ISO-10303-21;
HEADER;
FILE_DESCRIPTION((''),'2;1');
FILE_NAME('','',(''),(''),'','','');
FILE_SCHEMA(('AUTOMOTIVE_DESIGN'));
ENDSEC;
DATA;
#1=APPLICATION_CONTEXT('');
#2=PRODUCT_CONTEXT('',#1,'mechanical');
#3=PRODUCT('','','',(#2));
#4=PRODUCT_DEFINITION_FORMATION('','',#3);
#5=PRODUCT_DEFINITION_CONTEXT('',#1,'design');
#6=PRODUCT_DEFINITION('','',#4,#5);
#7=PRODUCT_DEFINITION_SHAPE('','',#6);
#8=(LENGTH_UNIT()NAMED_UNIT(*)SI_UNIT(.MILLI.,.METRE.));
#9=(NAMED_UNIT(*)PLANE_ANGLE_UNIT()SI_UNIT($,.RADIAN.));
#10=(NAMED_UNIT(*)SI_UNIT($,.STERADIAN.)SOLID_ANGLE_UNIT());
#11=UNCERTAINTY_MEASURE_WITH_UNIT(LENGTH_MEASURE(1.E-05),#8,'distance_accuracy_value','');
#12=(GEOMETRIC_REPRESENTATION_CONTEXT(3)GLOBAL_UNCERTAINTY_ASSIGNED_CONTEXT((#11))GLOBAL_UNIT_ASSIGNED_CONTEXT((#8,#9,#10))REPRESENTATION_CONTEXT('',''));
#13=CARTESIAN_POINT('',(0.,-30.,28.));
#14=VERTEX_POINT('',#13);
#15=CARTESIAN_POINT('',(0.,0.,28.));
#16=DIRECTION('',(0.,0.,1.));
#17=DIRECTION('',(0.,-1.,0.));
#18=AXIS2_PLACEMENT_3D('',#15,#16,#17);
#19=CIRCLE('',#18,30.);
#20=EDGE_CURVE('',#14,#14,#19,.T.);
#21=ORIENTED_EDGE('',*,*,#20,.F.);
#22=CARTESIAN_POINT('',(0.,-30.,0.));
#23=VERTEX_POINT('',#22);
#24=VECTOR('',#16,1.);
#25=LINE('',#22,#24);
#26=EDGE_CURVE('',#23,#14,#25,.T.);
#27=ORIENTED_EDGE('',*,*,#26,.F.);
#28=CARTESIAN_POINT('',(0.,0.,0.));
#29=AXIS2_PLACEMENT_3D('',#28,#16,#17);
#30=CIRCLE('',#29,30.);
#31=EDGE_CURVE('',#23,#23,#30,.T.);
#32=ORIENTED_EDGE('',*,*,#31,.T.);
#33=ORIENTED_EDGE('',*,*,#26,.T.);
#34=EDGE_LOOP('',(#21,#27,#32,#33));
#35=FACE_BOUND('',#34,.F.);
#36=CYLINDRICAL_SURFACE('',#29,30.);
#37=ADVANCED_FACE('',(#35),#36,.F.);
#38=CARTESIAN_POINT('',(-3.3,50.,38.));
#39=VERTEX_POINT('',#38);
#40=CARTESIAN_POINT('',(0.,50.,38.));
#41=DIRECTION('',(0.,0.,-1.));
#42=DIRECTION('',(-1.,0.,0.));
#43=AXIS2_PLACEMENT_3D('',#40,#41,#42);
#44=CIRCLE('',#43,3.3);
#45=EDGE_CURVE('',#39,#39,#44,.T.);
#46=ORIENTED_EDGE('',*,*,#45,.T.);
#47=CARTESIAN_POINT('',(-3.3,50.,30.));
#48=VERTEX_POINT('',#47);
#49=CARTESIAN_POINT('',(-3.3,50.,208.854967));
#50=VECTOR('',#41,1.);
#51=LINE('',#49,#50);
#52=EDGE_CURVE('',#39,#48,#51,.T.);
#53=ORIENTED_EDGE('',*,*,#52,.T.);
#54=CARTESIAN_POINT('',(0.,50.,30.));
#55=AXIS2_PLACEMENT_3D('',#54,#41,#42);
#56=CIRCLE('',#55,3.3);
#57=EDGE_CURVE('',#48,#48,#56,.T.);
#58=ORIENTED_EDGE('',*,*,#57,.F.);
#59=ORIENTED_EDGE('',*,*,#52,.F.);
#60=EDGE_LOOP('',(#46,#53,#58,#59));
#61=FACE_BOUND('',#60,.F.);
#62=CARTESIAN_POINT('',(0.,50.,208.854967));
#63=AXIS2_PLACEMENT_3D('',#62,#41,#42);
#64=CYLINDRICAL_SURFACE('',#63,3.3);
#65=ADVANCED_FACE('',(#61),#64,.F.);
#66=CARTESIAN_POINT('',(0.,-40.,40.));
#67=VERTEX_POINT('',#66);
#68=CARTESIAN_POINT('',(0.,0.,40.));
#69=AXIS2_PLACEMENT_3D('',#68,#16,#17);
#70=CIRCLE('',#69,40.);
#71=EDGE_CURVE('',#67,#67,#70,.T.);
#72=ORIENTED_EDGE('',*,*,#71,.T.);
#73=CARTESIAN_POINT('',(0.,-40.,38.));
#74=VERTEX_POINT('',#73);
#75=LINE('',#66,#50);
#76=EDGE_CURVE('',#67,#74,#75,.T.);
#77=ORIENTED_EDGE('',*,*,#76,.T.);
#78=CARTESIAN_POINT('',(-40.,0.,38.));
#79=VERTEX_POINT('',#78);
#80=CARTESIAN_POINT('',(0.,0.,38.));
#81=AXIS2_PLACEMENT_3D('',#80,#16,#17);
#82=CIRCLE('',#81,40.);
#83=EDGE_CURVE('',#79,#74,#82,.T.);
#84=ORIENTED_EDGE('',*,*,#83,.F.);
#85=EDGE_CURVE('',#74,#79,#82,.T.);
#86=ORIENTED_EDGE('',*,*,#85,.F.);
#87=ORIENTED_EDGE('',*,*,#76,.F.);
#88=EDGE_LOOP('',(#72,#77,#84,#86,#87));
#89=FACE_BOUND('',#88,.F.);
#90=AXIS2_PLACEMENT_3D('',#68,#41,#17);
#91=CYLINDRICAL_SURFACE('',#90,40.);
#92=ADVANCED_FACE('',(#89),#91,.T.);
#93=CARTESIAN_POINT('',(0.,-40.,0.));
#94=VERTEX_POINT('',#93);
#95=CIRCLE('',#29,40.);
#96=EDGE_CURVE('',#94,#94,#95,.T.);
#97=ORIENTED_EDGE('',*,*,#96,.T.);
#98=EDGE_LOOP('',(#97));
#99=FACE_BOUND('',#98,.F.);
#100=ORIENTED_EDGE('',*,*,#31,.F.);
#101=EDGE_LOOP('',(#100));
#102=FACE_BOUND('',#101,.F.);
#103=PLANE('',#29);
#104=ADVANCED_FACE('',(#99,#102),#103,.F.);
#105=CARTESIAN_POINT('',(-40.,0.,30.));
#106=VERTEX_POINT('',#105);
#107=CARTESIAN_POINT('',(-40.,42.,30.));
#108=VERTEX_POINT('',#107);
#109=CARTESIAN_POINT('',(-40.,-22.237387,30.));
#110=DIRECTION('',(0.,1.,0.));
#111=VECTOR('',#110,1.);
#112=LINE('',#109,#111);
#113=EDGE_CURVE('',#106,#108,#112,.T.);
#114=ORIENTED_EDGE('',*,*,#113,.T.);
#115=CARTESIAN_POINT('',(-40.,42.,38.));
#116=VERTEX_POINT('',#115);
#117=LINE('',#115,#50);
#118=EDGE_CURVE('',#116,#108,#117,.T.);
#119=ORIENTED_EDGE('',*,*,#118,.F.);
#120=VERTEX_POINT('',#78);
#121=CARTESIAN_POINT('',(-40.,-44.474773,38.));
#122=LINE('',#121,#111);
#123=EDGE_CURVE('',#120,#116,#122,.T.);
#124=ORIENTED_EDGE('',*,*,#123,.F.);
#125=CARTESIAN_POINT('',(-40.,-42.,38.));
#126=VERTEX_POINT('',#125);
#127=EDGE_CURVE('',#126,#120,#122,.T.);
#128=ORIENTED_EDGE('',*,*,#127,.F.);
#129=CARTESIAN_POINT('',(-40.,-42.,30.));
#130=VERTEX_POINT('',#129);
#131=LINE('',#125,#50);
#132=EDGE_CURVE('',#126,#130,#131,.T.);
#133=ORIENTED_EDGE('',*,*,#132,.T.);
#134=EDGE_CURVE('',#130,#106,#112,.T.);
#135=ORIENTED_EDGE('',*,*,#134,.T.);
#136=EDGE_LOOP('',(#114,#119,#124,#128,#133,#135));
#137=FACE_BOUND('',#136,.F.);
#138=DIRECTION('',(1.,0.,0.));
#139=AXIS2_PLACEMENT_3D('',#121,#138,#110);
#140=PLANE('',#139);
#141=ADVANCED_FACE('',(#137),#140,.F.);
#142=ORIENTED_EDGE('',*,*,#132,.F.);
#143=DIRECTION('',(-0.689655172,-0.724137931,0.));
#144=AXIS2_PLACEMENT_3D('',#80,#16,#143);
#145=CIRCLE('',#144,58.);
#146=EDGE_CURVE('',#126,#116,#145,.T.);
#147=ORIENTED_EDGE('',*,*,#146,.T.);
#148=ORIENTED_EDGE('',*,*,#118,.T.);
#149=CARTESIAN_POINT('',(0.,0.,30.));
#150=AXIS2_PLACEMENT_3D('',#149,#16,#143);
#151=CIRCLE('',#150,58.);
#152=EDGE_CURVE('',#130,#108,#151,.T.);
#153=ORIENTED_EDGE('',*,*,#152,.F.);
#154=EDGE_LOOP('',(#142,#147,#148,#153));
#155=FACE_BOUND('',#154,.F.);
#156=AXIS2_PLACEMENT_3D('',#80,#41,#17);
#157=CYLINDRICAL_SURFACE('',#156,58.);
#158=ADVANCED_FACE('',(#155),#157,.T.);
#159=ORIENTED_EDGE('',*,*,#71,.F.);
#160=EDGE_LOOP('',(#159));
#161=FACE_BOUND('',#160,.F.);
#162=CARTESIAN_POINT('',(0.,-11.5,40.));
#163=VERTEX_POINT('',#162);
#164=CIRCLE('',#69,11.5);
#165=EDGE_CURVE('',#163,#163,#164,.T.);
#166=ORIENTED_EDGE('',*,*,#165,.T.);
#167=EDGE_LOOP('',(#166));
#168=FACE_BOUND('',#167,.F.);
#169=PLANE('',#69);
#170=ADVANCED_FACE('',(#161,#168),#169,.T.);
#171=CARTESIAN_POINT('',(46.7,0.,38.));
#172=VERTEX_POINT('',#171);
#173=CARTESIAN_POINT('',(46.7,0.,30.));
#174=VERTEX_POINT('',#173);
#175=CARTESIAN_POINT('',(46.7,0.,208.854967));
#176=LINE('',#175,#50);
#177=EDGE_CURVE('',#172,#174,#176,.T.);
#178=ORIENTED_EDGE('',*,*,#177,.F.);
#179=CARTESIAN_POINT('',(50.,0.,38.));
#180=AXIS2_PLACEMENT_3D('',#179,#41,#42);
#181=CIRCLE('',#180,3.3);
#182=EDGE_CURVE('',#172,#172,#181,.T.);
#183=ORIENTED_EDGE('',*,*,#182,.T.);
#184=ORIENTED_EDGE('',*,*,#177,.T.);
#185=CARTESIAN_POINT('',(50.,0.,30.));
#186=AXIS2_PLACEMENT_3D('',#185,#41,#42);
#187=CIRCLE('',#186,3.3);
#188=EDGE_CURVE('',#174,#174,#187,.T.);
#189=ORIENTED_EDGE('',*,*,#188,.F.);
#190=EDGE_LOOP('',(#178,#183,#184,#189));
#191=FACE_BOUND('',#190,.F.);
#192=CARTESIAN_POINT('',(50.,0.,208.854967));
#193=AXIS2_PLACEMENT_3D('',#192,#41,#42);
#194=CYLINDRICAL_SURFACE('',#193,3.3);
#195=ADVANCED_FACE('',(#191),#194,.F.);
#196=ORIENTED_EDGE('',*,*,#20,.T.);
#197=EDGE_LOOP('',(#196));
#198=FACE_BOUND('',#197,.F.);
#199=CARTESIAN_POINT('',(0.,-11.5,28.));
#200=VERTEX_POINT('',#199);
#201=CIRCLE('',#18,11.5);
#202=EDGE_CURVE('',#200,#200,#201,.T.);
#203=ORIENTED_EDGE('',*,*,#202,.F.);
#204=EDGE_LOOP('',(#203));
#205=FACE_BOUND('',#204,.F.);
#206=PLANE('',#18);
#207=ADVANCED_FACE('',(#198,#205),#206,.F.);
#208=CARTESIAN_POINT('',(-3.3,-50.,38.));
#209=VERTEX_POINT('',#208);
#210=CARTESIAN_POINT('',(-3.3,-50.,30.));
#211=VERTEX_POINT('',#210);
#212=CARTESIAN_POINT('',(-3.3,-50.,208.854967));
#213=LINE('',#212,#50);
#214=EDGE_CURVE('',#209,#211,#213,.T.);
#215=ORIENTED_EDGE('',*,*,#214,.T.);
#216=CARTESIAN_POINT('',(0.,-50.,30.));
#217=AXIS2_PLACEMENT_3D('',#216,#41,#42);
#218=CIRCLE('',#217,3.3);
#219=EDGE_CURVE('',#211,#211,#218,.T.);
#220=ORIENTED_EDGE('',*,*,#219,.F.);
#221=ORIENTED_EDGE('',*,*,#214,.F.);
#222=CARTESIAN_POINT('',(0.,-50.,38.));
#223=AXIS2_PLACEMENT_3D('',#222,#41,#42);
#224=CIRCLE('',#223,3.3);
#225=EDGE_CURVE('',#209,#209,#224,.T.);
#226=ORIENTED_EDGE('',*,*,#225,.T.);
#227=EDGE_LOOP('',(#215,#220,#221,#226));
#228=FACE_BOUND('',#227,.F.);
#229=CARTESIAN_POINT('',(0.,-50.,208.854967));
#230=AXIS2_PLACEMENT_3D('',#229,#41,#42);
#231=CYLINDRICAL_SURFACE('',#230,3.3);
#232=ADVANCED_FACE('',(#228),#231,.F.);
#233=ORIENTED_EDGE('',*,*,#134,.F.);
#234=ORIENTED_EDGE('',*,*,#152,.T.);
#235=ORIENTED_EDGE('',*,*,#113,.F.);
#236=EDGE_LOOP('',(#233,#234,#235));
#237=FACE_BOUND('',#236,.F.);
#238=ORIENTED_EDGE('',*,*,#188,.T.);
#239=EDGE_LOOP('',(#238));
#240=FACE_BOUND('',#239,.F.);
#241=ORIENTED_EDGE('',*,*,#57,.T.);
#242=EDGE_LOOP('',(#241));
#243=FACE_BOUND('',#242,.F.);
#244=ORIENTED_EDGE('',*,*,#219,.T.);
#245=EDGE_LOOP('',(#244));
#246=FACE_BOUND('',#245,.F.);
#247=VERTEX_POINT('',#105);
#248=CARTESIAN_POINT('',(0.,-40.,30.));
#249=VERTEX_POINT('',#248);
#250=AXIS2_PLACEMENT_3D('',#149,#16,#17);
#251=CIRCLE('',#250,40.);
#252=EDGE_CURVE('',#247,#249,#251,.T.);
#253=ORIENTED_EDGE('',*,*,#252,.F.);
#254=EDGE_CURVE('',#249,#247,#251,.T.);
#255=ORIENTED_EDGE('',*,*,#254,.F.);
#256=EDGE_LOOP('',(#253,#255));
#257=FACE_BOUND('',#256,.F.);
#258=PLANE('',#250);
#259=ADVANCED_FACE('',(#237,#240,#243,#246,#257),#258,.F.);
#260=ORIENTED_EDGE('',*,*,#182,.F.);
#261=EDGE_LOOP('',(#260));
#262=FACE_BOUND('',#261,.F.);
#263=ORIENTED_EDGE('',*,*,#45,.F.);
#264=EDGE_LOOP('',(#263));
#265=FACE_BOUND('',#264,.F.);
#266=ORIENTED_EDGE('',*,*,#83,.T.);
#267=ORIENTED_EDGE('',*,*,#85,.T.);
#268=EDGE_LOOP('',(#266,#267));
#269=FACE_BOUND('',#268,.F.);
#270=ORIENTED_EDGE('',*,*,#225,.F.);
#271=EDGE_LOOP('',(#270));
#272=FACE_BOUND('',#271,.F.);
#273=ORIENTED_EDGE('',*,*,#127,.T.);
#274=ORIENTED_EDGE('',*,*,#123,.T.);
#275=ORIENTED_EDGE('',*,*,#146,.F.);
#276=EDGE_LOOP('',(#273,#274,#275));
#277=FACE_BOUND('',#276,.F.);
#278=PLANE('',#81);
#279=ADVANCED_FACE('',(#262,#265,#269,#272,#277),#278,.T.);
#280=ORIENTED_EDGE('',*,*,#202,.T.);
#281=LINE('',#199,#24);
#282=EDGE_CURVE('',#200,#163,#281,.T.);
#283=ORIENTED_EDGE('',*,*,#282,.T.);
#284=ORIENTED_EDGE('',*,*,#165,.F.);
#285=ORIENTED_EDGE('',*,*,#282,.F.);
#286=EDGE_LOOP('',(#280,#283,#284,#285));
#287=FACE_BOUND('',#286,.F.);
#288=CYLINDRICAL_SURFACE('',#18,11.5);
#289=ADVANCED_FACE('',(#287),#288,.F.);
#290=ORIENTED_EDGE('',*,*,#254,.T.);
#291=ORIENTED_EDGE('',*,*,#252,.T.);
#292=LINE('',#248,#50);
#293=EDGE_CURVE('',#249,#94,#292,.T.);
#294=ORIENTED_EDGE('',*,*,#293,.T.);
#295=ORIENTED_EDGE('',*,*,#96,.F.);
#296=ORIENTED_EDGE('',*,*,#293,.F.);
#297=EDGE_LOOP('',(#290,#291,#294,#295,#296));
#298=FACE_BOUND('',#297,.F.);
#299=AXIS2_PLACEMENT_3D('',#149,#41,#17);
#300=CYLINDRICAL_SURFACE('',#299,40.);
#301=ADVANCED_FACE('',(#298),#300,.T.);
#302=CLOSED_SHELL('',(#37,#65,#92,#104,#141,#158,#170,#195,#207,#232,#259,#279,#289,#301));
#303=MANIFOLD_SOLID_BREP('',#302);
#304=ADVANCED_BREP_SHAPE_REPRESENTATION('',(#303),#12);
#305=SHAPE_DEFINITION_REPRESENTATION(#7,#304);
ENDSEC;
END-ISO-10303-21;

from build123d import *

# Parameters (mm, degrees)
F3_D     = 6.6
F5_DEPTH = 25


# Not quite as in the source:
# - a feature names something its author has since deleted; it is built from what else it names


with BuildPart() as f1:
    # F0 (on Right) → F1 (revolve)
    with BuildSketch(Plane.YZ):
        Polygon((-11.5, 40), (-40, 40), (-40, 38), (-58, 38), (-58, 30), (-40, 30), (-40, 0), (-30, 0), (-30, 28), (-11.5, 28), align=None)
    revolve(axis=Axis((0, 0, 32.5555), (0, 0, 1)))

    # F3 (through all)
    with Locations(Plane.XY.offset(40)):
        with Locations((-50, 0), (0, 50), (50, 0), (0, -50)):
            Hole(F3_D / 2)

    # F4 (on face) → F5 (cut)
    with BuildSketch(Plane.XY.offset(38)):
        with BuildLine():
            Line((-40, -42), (-40, 0))
            Line((-40, 0), (-46.7, 0))
            ThreePointArc((-46.7, 0), (-50, -3.3), (-53.3, 0))
            Line((-53.3, 0), (-58, 0))
            ThreePointArc((-58, 0), (-53.310411741, -22.8473193176), (-40, -42))
        make_face()
        with BuildLine():
            Line((-46.7, 0), (-40, 0))
            Line((-40, 0), (-40, 42))
            ThreePointArc((-40, 42), (-53.310411741, 22.8473193176), (-58, 0))
            Line((-58, 0), (-53.3, 0))
            ThreePointArc((-53.3, 0), (-50, 3.3), (-46.7, 0))
        make_face()
        with BuildLine():
            Line((-40, -44.474773109), (-40, -42))
            ThreePointArc((-40, -42), (-53.310411741, -22.8473193176), (-58, 0))
            Line((-58, 0), (-66.5342658758, 0))
            Line((-66.5342658758, 0), (-66.5342658758, -44.474773109))
            Line((-66.5342658758, -44.474773109), (-40, -44.474773109))
        make_face()
        with BuildLine():
            ThreePointArc((-58, 0), (-53.310411741, 22.8473193176), (-40, 42))
            Line((-40, 42), (-40, 51.5907406807))
            Line((-40, 51.5907406807), (-66.5342658758, 51.5907406807))
            Line((-66.5342658758, 51.5907406807), (-66.5342658758, 0))
            Line((-66.5342658758, 0), (-58, 0))
        make_face()
    extrude(amount=-F5_DEPTH, mode=Mode.SUBTRACT)


solid = f1.part
